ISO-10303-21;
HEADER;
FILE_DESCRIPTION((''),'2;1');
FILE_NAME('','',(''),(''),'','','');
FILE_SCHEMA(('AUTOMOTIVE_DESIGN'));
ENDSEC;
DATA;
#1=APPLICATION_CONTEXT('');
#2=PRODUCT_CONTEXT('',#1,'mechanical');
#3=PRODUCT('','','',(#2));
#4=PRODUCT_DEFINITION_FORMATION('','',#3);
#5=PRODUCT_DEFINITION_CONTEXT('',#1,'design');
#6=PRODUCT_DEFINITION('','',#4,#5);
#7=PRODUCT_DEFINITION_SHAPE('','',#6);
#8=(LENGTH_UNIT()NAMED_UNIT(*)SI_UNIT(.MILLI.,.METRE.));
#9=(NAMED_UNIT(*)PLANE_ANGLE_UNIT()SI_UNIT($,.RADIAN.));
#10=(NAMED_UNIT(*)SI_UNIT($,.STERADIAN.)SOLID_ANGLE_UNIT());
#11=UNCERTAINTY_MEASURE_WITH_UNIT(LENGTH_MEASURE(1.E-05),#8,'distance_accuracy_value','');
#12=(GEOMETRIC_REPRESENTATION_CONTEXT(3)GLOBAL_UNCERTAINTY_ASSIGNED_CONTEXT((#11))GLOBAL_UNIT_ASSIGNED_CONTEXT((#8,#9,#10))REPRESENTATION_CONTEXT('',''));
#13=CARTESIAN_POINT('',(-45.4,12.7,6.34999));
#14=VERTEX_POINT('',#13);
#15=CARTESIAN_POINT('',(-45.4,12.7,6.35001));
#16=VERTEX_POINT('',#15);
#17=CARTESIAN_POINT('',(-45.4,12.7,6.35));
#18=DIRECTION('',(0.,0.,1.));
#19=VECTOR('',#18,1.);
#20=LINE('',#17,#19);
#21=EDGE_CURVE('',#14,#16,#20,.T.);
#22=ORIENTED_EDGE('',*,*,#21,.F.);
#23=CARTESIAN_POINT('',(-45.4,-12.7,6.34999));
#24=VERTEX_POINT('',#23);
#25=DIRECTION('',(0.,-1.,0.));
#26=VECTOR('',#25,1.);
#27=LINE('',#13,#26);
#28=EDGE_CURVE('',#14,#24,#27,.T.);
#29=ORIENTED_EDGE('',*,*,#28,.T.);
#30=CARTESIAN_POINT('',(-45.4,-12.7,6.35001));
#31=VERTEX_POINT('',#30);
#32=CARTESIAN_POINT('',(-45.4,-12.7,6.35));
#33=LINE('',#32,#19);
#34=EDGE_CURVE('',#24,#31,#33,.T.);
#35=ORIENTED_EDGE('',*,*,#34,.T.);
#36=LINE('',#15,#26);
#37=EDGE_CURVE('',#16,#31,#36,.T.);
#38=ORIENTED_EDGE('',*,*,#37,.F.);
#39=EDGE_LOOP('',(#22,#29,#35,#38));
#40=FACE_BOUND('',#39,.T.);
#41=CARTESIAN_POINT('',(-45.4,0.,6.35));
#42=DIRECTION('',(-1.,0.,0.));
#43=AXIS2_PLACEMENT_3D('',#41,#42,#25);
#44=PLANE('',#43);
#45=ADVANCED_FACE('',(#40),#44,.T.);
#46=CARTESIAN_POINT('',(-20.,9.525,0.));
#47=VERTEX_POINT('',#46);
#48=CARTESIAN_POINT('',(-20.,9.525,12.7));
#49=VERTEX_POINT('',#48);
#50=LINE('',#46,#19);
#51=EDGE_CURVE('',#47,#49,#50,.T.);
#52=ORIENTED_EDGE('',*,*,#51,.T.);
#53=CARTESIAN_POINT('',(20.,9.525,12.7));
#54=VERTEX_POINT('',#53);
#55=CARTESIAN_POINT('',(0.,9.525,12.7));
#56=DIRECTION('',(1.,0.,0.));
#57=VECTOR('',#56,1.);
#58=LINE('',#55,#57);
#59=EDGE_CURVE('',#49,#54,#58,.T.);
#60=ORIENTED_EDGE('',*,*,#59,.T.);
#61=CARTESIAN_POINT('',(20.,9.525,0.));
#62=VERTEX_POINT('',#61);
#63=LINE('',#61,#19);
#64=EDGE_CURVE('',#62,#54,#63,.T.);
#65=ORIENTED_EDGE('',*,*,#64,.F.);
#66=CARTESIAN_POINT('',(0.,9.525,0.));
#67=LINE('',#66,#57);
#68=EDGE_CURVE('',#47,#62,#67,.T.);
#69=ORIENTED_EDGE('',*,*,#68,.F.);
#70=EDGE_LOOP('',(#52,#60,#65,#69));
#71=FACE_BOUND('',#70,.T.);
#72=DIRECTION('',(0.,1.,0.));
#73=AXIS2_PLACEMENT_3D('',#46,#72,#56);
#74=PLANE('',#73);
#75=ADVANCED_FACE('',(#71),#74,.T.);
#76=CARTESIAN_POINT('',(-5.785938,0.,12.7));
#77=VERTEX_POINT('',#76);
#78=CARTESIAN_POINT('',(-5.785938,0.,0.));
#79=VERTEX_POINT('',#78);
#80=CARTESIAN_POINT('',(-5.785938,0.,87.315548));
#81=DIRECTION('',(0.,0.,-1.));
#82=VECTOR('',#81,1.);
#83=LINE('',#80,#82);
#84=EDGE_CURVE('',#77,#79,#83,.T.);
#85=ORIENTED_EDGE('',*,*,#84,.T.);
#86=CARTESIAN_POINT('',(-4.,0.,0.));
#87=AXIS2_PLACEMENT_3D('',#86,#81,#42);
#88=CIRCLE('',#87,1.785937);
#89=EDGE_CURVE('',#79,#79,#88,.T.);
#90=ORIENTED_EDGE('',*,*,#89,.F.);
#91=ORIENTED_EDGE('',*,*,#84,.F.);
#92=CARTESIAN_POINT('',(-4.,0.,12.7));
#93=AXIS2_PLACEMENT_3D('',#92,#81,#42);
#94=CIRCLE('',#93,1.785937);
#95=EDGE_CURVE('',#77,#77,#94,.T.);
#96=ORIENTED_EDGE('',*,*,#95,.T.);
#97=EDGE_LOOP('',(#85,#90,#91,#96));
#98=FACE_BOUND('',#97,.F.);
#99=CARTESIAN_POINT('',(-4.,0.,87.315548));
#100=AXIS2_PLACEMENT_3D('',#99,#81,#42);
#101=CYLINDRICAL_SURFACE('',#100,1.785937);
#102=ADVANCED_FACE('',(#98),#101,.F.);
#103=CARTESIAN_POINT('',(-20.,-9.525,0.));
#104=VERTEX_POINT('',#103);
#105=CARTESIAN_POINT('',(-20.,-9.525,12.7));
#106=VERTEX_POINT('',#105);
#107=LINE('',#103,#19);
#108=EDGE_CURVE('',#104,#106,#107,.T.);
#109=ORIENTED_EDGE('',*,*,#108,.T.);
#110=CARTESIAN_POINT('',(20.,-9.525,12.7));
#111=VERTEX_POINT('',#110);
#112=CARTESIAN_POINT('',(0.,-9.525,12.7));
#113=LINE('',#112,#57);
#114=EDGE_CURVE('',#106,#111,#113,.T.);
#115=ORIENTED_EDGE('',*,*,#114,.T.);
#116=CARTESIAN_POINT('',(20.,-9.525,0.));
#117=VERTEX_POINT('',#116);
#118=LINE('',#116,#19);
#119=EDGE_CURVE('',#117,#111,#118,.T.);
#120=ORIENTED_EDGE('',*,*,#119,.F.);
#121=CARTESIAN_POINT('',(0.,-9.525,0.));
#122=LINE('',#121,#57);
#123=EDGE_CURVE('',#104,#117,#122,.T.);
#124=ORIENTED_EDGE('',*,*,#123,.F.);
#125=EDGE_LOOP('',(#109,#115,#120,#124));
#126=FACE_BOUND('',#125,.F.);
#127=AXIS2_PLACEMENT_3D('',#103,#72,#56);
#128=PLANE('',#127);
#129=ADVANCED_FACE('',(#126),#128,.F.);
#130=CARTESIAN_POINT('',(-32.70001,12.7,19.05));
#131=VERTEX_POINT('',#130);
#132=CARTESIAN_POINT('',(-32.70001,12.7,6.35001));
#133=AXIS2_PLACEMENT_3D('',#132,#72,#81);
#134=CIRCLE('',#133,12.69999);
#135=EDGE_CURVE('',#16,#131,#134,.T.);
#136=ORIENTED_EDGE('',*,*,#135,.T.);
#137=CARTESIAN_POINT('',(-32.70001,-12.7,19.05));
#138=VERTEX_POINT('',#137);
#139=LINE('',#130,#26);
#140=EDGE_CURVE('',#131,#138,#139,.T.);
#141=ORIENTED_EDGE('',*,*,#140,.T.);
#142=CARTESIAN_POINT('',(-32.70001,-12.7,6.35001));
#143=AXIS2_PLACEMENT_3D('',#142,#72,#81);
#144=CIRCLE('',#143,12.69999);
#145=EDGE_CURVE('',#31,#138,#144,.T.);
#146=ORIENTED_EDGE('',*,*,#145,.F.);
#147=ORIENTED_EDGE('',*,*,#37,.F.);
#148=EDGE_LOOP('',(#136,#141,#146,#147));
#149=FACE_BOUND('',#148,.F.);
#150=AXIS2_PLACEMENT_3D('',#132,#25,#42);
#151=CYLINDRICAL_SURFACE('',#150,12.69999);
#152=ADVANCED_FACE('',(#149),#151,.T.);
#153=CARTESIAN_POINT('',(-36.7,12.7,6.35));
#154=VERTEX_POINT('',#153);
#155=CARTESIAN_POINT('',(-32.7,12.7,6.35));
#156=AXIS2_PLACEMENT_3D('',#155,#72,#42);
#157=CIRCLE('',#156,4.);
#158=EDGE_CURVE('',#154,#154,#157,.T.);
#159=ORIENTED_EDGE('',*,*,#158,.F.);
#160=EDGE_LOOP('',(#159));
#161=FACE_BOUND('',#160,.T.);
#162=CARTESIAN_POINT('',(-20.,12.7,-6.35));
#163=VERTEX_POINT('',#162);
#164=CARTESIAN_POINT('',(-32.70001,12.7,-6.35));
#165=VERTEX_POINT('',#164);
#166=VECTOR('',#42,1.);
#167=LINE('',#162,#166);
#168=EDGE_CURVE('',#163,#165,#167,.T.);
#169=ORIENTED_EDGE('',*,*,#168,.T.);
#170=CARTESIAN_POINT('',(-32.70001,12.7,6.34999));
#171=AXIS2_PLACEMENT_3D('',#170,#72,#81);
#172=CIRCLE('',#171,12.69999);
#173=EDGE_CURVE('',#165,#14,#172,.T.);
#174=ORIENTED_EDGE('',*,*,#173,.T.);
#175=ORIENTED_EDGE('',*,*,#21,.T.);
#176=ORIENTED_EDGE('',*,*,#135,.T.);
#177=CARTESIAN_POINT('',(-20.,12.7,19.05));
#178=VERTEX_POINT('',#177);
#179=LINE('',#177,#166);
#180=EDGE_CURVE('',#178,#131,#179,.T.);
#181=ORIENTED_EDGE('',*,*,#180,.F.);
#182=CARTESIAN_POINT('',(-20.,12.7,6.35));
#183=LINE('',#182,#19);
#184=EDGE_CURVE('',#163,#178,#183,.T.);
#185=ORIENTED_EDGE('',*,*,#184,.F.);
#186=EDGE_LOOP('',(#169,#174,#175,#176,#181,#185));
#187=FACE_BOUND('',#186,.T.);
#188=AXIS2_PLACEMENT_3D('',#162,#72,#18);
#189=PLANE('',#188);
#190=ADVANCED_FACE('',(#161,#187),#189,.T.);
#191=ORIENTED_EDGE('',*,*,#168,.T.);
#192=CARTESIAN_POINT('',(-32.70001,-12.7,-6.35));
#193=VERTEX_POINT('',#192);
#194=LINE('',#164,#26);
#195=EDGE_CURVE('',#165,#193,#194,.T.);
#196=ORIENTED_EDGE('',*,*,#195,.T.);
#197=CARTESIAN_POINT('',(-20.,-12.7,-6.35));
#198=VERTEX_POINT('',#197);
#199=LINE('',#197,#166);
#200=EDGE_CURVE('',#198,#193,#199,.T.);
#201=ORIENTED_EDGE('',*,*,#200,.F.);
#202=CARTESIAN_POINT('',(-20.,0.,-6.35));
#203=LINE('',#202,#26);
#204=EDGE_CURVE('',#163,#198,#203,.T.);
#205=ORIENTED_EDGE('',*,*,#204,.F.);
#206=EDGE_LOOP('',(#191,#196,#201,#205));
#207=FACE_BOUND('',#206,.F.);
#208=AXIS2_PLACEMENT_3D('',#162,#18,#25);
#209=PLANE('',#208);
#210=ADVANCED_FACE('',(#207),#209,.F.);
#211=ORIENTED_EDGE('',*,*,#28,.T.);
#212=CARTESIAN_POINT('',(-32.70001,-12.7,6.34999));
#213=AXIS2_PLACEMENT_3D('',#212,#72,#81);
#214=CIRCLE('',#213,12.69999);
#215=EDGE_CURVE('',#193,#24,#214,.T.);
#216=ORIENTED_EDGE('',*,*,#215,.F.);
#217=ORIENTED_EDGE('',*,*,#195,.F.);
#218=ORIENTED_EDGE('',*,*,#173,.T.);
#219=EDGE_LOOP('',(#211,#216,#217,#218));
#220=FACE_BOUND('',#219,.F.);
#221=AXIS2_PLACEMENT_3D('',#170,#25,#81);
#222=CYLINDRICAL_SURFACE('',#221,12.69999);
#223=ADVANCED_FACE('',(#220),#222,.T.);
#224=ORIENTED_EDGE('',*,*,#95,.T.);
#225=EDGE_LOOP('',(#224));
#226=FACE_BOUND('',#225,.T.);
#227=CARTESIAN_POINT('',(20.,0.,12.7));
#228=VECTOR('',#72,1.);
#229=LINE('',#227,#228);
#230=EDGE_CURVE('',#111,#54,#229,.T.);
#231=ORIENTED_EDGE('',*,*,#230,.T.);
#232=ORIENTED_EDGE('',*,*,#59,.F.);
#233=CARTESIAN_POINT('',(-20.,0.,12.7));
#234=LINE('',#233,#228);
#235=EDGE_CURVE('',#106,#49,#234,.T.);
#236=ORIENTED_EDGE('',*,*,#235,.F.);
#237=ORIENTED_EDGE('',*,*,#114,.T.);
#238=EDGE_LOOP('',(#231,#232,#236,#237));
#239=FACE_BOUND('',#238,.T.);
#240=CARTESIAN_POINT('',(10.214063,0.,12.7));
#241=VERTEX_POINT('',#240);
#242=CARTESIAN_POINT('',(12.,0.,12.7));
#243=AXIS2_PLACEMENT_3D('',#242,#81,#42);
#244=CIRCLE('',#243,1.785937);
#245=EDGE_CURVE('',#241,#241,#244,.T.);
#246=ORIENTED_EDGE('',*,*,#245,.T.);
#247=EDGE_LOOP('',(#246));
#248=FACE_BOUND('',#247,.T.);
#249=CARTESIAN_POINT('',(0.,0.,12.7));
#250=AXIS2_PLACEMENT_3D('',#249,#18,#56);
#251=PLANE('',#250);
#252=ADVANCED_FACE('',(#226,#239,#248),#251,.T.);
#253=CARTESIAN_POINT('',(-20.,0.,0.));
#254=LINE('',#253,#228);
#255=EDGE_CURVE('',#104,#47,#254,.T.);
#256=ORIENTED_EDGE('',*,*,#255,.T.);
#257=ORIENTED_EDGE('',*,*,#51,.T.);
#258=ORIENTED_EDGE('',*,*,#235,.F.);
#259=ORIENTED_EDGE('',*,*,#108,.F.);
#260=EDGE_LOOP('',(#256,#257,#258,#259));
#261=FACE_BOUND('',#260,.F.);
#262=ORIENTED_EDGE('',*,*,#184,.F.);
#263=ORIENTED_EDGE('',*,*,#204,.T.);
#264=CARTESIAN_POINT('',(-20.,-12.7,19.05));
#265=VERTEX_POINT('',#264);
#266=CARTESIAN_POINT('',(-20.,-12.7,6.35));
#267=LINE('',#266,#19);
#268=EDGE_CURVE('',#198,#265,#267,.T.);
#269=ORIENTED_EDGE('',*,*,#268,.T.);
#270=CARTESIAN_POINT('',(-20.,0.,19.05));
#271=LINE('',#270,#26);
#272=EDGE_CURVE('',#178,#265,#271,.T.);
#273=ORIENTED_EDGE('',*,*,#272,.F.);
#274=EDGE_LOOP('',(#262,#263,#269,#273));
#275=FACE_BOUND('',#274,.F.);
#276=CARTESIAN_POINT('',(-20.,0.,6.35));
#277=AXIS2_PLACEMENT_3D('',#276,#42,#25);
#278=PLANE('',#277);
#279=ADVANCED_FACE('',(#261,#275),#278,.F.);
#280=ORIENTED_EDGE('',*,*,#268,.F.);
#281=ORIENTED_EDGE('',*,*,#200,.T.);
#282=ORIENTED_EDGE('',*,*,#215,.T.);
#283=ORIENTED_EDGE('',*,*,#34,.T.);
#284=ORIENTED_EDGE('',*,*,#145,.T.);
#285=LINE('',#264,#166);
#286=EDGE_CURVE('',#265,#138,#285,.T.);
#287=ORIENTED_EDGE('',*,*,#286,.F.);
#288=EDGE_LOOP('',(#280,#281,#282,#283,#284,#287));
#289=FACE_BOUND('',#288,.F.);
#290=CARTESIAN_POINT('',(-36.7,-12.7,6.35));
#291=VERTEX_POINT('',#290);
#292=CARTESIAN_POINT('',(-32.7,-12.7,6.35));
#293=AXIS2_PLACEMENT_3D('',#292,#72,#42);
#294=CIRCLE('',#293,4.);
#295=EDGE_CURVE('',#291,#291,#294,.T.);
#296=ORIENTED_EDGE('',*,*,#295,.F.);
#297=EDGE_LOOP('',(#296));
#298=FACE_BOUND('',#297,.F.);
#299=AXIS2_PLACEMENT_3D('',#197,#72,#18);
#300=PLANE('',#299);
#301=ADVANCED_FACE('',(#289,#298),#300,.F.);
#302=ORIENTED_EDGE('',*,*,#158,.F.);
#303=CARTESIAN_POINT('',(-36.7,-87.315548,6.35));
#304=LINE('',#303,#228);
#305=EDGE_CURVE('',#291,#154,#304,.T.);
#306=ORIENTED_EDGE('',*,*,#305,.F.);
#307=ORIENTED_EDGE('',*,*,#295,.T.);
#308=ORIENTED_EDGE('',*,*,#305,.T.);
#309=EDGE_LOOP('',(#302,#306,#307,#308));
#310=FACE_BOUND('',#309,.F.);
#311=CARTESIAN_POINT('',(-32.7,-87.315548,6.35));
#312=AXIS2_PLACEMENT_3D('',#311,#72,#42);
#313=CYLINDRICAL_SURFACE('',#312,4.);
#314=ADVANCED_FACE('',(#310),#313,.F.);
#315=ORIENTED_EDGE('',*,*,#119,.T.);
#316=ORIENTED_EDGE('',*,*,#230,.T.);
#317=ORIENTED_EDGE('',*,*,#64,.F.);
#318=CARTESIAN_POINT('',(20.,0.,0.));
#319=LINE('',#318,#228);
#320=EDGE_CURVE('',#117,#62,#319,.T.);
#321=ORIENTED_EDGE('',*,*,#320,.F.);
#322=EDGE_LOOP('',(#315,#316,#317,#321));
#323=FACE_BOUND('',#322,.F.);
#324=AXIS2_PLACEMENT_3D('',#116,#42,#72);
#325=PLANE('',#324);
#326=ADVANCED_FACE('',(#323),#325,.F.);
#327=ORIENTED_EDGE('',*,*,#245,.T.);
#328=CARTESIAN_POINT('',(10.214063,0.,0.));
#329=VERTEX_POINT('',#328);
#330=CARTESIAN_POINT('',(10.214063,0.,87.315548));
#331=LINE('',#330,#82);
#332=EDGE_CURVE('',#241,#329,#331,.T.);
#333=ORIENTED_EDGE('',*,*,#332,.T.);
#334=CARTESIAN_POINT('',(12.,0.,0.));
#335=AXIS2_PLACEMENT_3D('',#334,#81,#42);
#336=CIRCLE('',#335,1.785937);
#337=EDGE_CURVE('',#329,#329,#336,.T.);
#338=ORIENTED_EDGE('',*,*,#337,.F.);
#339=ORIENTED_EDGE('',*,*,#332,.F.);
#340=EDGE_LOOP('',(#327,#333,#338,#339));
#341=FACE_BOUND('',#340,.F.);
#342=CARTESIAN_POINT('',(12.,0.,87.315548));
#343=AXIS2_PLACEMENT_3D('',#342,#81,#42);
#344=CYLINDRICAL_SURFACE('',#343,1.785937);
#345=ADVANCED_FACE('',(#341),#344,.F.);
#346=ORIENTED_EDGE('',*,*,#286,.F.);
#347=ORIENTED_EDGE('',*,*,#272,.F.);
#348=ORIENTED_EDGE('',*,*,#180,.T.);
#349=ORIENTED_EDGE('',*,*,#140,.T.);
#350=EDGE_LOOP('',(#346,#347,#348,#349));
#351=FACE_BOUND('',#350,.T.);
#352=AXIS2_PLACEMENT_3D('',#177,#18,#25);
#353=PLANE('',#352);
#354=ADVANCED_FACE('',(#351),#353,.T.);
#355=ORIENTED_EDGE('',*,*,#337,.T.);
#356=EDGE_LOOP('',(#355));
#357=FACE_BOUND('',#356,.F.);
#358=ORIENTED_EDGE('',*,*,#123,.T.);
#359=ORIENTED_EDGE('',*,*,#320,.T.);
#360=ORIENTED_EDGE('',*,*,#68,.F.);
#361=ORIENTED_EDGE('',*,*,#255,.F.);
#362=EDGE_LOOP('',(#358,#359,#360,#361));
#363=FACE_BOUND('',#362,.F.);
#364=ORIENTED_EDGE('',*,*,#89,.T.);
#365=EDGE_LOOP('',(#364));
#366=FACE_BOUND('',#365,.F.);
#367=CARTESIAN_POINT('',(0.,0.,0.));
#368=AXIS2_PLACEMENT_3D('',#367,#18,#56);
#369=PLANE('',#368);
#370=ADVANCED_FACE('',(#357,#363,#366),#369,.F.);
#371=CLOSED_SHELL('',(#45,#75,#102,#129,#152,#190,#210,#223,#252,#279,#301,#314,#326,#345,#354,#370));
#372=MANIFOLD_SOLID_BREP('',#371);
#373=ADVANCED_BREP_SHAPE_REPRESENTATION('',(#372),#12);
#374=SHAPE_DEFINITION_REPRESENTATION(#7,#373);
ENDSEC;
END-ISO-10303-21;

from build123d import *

# Parameters (mm, degrees)
F0_W     = 40
F0_H     = 19.05
F1_DEPTH = 12.7
F2_W     = 25.4
F2_H     = 25.4
F2_W_2   = 19.05
F2_H_2   = 12.7
F3_DEPTH = 25.4
F5_D     = 8
F6_R     = 12.69999
F8_D     = 3.571875


# Not quite as in the source:
# - a fillet or chamfer is up to 0.001 mm smaller than in the source, because OpenCascade refuses the exact size


with BuildPart() as f1:
    # F0 (on Top) → F1 (new body)
    with BuildSketch(Plane.XY):
        Rectangle(F0_W, F0_H)
    extrude(amount=F1_DEPTH)

    # F2 (on face) → F3 (join)
    with BuildSketch(Plane(origin=(-20, 0, 0), x_dir=(0, -1, 0), z_dir=(-1, 0, 0))):
        with Locations((0, 6.35)):
            Rectangle(F2_W, F2_H)
        with Locations((0, 6.35)):
            Rectangle(F2_W_2, F2_H_2, mode=Mode.SUBTRACT)
        with Locations((0, 6.35)):
            Rectangle(F2_W_2, F2_H_2)
    extrude(amount=F3_DEPTH)

    # F5 (through all)
    with Locations(Plane.XZ.offset(12.7)):
        with Locations((-32.7, 6.35)):
            Hole(F5_D / 2)

    # F6 (radius 12.7 in the source; OpenCascade refuses exactly that, so slightly less here)
    f6_edges = [f1.edges().sort_by_distance(p)[0] for p in [
        (-45.4, 0, 19.05),
        (-45.4, 0, -6.35),
    ]]
    fillet(f6_edges, radius=F6_R)

    # F8 (through all)
    with Locations(Plane.XY.offset(12.7)):
        with Locations((12, 0), (-4, 0)):
            Hole(F8_D / 2)


solid = f1.part
